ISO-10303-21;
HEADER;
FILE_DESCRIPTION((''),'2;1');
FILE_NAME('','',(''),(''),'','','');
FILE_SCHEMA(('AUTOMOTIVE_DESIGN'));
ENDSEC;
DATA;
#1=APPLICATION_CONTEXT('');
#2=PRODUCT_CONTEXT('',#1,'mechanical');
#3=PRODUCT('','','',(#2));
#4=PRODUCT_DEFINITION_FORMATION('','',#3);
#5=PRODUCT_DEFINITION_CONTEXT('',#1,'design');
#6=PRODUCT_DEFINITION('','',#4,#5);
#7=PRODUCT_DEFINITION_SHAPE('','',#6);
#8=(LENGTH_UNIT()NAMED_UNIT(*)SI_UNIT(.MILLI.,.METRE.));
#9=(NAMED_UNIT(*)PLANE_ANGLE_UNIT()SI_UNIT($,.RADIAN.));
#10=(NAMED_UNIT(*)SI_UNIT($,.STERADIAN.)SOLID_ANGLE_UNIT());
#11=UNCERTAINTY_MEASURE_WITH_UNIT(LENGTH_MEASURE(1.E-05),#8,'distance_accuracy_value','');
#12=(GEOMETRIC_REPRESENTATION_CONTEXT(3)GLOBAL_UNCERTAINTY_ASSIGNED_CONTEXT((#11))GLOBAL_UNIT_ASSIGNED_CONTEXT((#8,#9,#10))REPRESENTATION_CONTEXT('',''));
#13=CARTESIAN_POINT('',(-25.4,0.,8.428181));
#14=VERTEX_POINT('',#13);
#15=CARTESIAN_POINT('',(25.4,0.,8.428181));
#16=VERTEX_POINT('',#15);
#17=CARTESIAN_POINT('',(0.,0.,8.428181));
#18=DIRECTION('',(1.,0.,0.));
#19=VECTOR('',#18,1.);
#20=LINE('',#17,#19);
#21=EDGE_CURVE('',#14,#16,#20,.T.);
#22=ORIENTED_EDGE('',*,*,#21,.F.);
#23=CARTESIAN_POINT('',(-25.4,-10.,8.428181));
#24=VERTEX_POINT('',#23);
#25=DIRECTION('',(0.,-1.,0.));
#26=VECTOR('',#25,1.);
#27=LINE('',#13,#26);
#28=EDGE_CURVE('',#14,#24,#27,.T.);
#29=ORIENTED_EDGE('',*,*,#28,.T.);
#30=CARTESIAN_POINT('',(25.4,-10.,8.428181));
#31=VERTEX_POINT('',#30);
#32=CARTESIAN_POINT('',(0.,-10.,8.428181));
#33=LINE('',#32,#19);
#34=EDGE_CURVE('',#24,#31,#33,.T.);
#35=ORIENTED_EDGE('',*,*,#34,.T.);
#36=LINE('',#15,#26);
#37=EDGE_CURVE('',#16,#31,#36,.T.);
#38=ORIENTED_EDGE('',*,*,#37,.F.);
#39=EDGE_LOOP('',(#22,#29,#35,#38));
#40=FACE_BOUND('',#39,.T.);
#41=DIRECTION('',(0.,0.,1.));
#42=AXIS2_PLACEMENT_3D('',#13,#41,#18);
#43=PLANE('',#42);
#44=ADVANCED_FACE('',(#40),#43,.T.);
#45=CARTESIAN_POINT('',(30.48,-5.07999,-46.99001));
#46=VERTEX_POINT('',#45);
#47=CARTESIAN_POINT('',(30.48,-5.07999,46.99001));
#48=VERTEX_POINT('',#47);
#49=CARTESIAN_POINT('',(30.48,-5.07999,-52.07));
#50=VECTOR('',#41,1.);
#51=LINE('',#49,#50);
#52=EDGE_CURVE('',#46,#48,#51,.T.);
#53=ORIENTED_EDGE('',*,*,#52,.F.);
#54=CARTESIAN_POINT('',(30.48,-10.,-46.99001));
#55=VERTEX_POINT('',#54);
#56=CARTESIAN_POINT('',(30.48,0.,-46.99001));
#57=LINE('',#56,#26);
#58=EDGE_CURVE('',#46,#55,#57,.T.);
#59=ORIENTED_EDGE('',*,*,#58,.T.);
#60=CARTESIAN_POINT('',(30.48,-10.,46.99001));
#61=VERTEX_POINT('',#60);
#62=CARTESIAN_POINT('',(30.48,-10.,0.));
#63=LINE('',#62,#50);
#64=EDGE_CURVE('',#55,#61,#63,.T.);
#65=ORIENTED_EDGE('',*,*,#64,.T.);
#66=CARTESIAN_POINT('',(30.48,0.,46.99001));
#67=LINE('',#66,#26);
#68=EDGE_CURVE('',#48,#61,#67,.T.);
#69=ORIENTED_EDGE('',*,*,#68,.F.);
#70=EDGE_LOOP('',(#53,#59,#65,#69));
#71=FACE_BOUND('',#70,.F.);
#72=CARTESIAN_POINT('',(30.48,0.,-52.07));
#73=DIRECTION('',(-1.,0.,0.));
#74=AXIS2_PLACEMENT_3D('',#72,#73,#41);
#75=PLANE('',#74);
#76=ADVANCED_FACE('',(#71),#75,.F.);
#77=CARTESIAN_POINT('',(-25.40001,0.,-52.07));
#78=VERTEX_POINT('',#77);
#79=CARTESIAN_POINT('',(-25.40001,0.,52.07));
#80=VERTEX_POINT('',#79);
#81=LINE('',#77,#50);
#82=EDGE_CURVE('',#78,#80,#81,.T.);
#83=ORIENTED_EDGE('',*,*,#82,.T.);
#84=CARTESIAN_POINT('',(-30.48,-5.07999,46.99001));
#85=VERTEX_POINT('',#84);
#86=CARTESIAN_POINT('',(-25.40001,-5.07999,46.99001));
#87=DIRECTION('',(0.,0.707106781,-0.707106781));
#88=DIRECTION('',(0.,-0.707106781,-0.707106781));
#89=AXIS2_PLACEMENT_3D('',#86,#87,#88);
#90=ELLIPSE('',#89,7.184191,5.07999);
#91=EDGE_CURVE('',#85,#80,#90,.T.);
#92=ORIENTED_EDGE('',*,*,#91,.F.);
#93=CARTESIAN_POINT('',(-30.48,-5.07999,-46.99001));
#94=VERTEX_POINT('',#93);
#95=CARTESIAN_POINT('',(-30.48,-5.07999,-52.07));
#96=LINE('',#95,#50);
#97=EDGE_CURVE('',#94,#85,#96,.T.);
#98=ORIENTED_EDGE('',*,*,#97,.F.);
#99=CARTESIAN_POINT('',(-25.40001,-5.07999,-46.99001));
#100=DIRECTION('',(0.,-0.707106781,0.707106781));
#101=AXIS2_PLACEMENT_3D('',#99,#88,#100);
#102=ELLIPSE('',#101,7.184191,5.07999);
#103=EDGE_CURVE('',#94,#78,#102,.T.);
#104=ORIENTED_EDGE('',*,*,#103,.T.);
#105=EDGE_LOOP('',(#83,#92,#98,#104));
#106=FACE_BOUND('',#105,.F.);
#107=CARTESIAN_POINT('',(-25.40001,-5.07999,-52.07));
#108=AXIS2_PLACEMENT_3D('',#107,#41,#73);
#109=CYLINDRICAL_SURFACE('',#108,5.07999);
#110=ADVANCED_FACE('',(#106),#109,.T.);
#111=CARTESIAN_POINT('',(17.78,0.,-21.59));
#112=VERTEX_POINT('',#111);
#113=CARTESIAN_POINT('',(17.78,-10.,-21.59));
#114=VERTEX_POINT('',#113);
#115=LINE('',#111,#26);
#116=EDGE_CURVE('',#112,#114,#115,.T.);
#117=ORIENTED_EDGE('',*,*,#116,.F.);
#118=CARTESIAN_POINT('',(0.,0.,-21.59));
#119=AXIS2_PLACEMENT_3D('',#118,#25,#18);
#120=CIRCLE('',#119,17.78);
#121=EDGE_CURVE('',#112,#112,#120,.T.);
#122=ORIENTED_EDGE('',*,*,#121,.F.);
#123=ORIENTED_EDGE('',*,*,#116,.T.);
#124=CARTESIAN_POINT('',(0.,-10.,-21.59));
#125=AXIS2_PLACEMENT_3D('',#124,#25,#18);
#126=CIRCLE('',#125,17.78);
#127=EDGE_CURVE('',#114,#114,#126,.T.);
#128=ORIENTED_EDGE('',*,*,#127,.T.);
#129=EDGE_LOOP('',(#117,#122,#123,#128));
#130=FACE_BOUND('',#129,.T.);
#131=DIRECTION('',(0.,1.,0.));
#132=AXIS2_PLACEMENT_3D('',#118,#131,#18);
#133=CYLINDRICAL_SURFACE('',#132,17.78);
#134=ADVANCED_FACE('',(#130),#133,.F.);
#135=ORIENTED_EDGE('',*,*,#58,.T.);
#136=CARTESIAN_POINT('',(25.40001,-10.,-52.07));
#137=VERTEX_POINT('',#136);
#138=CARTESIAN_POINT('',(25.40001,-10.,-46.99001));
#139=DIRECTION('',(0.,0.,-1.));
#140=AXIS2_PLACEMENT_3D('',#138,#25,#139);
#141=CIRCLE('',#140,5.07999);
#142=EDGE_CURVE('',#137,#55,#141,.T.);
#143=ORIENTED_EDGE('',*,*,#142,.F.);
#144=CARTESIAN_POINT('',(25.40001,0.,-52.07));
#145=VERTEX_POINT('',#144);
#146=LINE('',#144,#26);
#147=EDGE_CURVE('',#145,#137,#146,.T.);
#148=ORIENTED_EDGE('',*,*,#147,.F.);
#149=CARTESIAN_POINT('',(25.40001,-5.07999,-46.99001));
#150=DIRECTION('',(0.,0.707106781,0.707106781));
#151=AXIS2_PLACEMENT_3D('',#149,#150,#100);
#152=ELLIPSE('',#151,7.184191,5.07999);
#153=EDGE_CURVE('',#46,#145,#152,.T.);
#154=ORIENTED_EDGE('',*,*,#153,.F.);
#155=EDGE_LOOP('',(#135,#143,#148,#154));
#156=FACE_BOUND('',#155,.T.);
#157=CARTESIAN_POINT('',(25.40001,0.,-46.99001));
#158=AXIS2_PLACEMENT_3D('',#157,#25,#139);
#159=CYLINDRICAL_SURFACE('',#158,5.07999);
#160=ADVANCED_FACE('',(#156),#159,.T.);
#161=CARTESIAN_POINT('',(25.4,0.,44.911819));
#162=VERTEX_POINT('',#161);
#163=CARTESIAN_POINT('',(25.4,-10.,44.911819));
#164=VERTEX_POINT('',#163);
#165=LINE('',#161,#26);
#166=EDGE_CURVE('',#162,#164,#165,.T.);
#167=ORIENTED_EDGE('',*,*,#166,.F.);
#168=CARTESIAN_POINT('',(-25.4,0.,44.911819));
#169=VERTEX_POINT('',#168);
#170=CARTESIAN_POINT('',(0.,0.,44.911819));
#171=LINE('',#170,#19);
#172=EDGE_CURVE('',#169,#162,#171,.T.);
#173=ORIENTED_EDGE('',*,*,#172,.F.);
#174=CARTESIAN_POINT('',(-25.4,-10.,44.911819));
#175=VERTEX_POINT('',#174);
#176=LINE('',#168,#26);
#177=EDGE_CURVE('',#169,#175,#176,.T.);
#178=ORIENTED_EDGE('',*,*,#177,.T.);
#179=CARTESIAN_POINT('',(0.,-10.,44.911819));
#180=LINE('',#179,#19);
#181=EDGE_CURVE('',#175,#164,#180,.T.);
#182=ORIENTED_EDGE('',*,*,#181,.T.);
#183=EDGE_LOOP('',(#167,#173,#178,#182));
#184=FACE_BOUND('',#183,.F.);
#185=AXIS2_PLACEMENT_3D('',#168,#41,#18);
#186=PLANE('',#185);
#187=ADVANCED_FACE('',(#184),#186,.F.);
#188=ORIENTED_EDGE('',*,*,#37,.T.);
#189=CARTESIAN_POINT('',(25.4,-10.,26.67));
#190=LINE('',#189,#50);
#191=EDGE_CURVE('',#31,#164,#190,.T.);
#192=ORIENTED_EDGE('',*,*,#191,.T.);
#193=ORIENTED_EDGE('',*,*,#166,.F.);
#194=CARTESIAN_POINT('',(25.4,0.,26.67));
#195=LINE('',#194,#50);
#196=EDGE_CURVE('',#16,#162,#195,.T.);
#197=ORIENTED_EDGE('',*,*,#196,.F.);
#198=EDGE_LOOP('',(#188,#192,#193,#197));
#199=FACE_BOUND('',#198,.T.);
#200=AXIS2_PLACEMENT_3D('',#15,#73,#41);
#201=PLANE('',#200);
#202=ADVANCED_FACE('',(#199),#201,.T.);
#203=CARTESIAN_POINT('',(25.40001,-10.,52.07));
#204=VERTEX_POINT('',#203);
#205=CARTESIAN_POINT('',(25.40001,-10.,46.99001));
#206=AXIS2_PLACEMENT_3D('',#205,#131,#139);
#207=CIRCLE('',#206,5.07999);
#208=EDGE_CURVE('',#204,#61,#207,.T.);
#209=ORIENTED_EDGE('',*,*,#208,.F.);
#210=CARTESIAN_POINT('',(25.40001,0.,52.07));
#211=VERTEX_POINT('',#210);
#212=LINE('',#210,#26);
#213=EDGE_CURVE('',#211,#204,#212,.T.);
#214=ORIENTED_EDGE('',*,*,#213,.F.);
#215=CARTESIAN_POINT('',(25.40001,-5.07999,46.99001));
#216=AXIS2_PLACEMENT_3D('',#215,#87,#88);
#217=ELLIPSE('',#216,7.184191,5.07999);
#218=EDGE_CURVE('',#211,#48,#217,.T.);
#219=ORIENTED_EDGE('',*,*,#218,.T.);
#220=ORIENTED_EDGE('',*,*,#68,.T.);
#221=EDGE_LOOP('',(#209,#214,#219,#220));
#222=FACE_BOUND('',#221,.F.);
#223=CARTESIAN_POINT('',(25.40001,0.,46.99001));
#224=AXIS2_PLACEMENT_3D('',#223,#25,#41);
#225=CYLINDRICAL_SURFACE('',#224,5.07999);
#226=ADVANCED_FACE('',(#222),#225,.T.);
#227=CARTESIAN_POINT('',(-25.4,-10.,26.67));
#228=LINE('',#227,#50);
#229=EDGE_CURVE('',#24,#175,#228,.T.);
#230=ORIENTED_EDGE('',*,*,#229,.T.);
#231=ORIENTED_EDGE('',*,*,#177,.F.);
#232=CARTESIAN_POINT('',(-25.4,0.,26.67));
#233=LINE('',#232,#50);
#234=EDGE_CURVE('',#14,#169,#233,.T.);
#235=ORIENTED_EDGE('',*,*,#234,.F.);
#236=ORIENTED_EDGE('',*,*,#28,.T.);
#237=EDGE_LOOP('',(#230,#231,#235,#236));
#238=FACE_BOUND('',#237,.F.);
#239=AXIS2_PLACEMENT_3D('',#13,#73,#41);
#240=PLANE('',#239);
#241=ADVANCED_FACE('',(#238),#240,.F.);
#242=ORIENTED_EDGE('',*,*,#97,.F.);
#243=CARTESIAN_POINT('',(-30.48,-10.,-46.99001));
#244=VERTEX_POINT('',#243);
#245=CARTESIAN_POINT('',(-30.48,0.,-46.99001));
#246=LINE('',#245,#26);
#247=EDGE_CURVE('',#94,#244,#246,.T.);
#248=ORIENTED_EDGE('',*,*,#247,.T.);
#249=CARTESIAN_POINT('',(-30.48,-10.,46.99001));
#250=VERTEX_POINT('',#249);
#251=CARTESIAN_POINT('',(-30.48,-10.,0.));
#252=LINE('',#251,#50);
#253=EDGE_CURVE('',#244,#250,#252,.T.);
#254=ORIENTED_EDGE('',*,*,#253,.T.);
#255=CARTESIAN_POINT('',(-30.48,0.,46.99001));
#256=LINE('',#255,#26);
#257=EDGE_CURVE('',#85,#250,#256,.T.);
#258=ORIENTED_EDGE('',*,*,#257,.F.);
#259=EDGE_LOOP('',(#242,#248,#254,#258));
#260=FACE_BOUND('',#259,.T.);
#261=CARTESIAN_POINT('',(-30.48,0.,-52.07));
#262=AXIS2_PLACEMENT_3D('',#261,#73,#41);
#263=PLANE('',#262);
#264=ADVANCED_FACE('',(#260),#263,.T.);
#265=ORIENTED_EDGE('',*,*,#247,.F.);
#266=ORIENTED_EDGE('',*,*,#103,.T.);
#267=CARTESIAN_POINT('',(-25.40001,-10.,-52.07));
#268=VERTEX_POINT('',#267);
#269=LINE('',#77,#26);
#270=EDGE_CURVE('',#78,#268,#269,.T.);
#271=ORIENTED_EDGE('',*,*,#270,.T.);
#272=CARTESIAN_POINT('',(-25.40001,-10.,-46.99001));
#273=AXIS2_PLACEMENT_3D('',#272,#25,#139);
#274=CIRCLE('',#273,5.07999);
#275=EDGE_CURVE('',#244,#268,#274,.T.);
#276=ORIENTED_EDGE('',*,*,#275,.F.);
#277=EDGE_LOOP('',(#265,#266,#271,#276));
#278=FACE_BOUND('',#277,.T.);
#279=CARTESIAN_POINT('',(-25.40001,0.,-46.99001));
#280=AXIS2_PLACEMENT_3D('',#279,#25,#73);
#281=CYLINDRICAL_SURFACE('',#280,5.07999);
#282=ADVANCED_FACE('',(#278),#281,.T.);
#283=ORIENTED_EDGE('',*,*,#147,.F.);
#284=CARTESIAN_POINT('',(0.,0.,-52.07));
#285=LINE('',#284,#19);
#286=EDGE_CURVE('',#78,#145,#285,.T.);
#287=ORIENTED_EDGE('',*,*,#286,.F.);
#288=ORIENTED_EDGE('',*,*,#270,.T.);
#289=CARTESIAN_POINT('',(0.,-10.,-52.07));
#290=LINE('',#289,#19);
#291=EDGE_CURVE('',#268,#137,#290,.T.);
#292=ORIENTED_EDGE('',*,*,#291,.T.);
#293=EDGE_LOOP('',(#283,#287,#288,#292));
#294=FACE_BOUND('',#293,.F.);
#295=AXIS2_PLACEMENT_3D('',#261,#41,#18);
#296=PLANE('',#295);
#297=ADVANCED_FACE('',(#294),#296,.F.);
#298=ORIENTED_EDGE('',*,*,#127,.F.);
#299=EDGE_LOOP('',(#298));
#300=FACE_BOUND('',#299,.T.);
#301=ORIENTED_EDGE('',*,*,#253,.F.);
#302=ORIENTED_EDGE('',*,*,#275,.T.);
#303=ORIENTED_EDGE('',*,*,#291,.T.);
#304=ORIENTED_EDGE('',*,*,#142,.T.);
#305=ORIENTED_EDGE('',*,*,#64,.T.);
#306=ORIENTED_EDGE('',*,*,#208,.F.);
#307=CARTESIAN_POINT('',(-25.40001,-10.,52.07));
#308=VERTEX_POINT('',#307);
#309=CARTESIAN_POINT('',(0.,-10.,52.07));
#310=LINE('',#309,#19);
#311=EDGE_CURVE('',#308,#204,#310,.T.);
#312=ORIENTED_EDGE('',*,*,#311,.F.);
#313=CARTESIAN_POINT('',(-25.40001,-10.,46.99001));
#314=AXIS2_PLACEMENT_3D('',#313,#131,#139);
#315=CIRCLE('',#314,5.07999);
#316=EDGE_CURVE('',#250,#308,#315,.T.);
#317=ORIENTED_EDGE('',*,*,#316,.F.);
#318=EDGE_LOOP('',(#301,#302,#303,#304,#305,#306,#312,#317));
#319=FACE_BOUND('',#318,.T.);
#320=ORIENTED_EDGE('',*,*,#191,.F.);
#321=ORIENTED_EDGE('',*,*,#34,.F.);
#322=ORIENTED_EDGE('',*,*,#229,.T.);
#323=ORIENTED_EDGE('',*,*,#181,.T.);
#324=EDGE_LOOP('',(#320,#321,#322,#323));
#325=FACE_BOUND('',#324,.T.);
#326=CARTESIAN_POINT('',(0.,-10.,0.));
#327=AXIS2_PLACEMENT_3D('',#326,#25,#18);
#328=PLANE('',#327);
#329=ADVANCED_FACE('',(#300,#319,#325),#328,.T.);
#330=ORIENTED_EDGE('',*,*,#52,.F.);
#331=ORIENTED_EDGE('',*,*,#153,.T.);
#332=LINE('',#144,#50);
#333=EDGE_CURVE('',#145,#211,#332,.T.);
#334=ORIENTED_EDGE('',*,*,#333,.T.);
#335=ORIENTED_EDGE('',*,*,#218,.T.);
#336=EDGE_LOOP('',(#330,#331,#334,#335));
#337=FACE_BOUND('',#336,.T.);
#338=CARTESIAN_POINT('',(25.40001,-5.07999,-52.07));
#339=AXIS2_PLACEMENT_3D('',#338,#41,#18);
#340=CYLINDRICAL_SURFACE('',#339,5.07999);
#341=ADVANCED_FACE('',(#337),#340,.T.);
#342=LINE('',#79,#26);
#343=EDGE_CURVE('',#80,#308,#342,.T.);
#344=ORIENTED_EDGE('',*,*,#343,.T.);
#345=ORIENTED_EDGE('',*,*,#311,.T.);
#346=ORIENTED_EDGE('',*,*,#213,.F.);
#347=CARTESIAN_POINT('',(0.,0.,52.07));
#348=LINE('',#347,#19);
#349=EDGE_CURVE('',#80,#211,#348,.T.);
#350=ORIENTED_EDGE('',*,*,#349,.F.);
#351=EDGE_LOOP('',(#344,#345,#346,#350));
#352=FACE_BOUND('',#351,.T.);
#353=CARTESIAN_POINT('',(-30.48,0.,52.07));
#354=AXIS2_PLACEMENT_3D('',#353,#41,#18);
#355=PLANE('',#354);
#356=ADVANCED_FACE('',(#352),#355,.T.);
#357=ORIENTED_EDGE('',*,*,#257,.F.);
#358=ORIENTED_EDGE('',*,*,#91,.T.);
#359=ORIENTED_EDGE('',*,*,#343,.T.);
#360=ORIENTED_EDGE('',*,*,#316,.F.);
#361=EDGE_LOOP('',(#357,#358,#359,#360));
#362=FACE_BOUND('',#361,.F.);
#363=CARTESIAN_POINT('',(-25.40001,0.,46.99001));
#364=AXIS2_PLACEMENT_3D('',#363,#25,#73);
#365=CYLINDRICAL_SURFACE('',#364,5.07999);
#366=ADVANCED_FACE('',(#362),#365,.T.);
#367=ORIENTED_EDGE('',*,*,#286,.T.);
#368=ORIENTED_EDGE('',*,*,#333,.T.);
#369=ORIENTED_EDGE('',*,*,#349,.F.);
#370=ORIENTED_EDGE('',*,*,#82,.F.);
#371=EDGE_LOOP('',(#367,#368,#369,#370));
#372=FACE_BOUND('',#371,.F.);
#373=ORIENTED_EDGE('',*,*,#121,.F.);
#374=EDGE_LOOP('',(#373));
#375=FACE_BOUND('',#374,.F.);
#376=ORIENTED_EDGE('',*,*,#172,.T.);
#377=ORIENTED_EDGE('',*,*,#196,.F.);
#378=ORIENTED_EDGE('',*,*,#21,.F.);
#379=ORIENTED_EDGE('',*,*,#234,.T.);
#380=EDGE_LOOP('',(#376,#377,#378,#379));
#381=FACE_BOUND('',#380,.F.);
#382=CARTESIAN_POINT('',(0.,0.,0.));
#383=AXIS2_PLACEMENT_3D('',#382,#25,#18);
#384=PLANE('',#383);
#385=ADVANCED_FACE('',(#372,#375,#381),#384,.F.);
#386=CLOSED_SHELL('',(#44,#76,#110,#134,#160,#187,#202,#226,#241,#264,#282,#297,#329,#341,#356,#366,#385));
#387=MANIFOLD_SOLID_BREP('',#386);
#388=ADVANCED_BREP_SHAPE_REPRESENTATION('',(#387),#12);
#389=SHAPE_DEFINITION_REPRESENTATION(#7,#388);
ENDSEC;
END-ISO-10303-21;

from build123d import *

# Parameters (mm, degrees)
F0_W     = 60.96
F0_H     = 104.14
F0_R     = 17.78
F0_W_2   = 50.8
F0_H_2   = 36.4836389199
F1_DEPTH = 10
F2_R     = 5.07999


# Not quite as in the source:
# - a fillet or chamfer is up to 0.001 mm smaller than in the source, because OpenCascade refuses the exact size


with BuildPart() as f1:
    # F0 (on Front) → F1 (new body)
    with BuildSketch(Plane.XZ):
        Rectangle(F0_W, F0_H)
        with Locations((0, -21.59)):
            Circle(F0_R, mode=Mode.SUBTRACT)
        with Locations((0, 26.67)):
            Rectangle(F0_W_2, F0_H_2, mode=Mode.SUBTRACT)
    extrude(amount=F1_DEPTH)

    # F2 (radius 5.08 in the source; OpenCascade refuses exactly that, so slightly less here)
    f2_edges = [f1.edges().sort_by_distance(p)[0] for p in [
        (-30.48, -5, 52.07),
        (-30.48, -5, -52.07),
        (30.48, -5, 52.07),
        (-30.48, 0, 0),
        (30.48, 0, 0),
        (30.48, -5, -52.07),
    ]]
    fillet(f2_edges, radius=F2_R)


solid = f1.part
